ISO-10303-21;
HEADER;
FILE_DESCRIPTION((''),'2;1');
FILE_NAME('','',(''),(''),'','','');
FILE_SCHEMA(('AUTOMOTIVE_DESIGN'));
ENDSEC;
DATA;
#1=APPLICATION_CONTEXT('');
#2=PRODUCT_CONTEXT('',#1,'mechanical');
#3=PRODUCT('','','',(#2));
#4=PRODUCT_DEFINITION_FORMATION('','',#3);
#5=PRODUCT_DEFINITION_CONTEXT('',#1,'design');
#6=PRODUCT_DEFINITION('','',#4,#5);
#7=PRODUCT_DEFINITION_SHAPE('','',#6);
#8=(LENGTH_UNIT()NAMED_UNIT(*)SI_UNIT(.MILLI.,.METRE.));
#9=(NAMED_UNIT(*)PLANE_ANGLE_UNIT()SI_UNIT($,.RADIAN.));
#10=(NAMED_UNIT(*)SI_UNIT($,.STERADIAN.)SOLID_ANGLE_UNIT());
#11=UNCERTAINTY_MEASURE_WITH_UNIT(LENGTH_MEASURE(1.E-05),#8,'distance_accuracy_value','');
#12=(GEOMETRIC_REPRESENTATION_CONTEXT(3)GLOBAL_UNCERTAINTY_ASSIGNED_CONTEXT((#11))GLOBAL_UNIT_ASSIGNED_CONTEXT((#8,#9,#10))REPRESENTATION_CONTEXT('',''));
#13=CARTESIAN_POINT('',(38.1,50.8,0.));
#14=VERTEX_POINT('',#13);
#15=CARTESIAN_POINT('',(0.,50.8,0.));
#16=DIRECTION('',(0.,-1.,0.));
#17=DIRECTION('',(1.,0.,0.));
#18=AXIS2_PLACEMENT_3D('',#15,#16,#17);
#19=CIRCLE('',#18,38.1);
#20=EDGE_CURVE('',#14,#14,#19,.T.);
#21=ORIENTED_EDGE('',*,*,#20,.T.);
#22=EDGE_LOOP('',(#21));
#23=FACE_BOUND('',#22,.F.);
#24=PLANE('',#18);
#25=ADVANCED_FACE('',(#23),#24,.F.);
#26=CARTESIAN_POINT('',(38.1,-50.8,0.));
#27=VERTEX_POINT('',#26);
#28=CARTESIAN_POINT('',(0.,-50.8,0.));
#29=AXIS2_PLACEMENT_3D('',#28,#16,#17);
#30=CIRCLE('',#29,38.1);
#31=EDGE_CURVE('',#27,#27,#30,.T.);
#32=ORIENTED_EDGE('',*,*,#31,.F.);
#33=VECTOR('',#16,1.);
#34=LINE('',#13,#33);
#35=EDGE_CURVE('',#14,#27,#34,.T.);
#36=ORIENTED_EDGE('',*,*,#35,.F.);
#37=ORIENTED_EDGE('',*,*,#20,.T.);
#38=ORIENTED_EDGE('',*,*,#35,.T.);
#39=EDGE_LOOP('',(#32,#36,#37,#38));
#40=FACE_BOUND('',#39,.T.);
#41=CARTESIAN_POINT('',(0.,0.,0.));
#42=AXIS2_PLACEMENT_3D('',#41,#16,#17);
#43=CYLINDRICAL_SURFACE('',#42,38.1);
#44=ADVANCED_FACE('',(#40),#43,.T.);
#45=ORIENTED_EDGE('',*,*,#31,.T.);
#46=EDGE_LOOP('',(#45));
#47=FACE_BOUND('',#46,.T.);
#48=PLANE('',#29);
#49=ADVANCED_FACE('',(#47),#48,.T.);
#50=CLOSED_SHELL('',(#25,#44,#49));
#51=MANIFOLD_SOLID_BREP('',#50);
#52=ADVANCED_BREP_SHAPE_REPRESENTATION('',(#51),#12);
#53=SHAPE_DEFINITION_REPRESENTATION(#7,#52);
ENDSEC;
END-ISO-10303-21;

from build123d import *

# Parameters (mm, degrees)
F0_R     = 38.1
F0_R_2   = 19.05
F1_DEPTH = 50.8


# Not quite as in the source:
# - the program builds the solid bodies; features that only make, move or delete a surface that nothing else refers to are left out


with BuildPart() as f1:
    # F0 (on Front) → F1 (new body, symmetric)
    with BuildSketch(Plane.XZ):
        Circle(F0_R)
        Circle(F0_R_2, mode=Mode.SUBTRACT)
        Circle(F0_R_2)
    extrude(amount=F1_DEPTH, both=True)


solid = f1.part
